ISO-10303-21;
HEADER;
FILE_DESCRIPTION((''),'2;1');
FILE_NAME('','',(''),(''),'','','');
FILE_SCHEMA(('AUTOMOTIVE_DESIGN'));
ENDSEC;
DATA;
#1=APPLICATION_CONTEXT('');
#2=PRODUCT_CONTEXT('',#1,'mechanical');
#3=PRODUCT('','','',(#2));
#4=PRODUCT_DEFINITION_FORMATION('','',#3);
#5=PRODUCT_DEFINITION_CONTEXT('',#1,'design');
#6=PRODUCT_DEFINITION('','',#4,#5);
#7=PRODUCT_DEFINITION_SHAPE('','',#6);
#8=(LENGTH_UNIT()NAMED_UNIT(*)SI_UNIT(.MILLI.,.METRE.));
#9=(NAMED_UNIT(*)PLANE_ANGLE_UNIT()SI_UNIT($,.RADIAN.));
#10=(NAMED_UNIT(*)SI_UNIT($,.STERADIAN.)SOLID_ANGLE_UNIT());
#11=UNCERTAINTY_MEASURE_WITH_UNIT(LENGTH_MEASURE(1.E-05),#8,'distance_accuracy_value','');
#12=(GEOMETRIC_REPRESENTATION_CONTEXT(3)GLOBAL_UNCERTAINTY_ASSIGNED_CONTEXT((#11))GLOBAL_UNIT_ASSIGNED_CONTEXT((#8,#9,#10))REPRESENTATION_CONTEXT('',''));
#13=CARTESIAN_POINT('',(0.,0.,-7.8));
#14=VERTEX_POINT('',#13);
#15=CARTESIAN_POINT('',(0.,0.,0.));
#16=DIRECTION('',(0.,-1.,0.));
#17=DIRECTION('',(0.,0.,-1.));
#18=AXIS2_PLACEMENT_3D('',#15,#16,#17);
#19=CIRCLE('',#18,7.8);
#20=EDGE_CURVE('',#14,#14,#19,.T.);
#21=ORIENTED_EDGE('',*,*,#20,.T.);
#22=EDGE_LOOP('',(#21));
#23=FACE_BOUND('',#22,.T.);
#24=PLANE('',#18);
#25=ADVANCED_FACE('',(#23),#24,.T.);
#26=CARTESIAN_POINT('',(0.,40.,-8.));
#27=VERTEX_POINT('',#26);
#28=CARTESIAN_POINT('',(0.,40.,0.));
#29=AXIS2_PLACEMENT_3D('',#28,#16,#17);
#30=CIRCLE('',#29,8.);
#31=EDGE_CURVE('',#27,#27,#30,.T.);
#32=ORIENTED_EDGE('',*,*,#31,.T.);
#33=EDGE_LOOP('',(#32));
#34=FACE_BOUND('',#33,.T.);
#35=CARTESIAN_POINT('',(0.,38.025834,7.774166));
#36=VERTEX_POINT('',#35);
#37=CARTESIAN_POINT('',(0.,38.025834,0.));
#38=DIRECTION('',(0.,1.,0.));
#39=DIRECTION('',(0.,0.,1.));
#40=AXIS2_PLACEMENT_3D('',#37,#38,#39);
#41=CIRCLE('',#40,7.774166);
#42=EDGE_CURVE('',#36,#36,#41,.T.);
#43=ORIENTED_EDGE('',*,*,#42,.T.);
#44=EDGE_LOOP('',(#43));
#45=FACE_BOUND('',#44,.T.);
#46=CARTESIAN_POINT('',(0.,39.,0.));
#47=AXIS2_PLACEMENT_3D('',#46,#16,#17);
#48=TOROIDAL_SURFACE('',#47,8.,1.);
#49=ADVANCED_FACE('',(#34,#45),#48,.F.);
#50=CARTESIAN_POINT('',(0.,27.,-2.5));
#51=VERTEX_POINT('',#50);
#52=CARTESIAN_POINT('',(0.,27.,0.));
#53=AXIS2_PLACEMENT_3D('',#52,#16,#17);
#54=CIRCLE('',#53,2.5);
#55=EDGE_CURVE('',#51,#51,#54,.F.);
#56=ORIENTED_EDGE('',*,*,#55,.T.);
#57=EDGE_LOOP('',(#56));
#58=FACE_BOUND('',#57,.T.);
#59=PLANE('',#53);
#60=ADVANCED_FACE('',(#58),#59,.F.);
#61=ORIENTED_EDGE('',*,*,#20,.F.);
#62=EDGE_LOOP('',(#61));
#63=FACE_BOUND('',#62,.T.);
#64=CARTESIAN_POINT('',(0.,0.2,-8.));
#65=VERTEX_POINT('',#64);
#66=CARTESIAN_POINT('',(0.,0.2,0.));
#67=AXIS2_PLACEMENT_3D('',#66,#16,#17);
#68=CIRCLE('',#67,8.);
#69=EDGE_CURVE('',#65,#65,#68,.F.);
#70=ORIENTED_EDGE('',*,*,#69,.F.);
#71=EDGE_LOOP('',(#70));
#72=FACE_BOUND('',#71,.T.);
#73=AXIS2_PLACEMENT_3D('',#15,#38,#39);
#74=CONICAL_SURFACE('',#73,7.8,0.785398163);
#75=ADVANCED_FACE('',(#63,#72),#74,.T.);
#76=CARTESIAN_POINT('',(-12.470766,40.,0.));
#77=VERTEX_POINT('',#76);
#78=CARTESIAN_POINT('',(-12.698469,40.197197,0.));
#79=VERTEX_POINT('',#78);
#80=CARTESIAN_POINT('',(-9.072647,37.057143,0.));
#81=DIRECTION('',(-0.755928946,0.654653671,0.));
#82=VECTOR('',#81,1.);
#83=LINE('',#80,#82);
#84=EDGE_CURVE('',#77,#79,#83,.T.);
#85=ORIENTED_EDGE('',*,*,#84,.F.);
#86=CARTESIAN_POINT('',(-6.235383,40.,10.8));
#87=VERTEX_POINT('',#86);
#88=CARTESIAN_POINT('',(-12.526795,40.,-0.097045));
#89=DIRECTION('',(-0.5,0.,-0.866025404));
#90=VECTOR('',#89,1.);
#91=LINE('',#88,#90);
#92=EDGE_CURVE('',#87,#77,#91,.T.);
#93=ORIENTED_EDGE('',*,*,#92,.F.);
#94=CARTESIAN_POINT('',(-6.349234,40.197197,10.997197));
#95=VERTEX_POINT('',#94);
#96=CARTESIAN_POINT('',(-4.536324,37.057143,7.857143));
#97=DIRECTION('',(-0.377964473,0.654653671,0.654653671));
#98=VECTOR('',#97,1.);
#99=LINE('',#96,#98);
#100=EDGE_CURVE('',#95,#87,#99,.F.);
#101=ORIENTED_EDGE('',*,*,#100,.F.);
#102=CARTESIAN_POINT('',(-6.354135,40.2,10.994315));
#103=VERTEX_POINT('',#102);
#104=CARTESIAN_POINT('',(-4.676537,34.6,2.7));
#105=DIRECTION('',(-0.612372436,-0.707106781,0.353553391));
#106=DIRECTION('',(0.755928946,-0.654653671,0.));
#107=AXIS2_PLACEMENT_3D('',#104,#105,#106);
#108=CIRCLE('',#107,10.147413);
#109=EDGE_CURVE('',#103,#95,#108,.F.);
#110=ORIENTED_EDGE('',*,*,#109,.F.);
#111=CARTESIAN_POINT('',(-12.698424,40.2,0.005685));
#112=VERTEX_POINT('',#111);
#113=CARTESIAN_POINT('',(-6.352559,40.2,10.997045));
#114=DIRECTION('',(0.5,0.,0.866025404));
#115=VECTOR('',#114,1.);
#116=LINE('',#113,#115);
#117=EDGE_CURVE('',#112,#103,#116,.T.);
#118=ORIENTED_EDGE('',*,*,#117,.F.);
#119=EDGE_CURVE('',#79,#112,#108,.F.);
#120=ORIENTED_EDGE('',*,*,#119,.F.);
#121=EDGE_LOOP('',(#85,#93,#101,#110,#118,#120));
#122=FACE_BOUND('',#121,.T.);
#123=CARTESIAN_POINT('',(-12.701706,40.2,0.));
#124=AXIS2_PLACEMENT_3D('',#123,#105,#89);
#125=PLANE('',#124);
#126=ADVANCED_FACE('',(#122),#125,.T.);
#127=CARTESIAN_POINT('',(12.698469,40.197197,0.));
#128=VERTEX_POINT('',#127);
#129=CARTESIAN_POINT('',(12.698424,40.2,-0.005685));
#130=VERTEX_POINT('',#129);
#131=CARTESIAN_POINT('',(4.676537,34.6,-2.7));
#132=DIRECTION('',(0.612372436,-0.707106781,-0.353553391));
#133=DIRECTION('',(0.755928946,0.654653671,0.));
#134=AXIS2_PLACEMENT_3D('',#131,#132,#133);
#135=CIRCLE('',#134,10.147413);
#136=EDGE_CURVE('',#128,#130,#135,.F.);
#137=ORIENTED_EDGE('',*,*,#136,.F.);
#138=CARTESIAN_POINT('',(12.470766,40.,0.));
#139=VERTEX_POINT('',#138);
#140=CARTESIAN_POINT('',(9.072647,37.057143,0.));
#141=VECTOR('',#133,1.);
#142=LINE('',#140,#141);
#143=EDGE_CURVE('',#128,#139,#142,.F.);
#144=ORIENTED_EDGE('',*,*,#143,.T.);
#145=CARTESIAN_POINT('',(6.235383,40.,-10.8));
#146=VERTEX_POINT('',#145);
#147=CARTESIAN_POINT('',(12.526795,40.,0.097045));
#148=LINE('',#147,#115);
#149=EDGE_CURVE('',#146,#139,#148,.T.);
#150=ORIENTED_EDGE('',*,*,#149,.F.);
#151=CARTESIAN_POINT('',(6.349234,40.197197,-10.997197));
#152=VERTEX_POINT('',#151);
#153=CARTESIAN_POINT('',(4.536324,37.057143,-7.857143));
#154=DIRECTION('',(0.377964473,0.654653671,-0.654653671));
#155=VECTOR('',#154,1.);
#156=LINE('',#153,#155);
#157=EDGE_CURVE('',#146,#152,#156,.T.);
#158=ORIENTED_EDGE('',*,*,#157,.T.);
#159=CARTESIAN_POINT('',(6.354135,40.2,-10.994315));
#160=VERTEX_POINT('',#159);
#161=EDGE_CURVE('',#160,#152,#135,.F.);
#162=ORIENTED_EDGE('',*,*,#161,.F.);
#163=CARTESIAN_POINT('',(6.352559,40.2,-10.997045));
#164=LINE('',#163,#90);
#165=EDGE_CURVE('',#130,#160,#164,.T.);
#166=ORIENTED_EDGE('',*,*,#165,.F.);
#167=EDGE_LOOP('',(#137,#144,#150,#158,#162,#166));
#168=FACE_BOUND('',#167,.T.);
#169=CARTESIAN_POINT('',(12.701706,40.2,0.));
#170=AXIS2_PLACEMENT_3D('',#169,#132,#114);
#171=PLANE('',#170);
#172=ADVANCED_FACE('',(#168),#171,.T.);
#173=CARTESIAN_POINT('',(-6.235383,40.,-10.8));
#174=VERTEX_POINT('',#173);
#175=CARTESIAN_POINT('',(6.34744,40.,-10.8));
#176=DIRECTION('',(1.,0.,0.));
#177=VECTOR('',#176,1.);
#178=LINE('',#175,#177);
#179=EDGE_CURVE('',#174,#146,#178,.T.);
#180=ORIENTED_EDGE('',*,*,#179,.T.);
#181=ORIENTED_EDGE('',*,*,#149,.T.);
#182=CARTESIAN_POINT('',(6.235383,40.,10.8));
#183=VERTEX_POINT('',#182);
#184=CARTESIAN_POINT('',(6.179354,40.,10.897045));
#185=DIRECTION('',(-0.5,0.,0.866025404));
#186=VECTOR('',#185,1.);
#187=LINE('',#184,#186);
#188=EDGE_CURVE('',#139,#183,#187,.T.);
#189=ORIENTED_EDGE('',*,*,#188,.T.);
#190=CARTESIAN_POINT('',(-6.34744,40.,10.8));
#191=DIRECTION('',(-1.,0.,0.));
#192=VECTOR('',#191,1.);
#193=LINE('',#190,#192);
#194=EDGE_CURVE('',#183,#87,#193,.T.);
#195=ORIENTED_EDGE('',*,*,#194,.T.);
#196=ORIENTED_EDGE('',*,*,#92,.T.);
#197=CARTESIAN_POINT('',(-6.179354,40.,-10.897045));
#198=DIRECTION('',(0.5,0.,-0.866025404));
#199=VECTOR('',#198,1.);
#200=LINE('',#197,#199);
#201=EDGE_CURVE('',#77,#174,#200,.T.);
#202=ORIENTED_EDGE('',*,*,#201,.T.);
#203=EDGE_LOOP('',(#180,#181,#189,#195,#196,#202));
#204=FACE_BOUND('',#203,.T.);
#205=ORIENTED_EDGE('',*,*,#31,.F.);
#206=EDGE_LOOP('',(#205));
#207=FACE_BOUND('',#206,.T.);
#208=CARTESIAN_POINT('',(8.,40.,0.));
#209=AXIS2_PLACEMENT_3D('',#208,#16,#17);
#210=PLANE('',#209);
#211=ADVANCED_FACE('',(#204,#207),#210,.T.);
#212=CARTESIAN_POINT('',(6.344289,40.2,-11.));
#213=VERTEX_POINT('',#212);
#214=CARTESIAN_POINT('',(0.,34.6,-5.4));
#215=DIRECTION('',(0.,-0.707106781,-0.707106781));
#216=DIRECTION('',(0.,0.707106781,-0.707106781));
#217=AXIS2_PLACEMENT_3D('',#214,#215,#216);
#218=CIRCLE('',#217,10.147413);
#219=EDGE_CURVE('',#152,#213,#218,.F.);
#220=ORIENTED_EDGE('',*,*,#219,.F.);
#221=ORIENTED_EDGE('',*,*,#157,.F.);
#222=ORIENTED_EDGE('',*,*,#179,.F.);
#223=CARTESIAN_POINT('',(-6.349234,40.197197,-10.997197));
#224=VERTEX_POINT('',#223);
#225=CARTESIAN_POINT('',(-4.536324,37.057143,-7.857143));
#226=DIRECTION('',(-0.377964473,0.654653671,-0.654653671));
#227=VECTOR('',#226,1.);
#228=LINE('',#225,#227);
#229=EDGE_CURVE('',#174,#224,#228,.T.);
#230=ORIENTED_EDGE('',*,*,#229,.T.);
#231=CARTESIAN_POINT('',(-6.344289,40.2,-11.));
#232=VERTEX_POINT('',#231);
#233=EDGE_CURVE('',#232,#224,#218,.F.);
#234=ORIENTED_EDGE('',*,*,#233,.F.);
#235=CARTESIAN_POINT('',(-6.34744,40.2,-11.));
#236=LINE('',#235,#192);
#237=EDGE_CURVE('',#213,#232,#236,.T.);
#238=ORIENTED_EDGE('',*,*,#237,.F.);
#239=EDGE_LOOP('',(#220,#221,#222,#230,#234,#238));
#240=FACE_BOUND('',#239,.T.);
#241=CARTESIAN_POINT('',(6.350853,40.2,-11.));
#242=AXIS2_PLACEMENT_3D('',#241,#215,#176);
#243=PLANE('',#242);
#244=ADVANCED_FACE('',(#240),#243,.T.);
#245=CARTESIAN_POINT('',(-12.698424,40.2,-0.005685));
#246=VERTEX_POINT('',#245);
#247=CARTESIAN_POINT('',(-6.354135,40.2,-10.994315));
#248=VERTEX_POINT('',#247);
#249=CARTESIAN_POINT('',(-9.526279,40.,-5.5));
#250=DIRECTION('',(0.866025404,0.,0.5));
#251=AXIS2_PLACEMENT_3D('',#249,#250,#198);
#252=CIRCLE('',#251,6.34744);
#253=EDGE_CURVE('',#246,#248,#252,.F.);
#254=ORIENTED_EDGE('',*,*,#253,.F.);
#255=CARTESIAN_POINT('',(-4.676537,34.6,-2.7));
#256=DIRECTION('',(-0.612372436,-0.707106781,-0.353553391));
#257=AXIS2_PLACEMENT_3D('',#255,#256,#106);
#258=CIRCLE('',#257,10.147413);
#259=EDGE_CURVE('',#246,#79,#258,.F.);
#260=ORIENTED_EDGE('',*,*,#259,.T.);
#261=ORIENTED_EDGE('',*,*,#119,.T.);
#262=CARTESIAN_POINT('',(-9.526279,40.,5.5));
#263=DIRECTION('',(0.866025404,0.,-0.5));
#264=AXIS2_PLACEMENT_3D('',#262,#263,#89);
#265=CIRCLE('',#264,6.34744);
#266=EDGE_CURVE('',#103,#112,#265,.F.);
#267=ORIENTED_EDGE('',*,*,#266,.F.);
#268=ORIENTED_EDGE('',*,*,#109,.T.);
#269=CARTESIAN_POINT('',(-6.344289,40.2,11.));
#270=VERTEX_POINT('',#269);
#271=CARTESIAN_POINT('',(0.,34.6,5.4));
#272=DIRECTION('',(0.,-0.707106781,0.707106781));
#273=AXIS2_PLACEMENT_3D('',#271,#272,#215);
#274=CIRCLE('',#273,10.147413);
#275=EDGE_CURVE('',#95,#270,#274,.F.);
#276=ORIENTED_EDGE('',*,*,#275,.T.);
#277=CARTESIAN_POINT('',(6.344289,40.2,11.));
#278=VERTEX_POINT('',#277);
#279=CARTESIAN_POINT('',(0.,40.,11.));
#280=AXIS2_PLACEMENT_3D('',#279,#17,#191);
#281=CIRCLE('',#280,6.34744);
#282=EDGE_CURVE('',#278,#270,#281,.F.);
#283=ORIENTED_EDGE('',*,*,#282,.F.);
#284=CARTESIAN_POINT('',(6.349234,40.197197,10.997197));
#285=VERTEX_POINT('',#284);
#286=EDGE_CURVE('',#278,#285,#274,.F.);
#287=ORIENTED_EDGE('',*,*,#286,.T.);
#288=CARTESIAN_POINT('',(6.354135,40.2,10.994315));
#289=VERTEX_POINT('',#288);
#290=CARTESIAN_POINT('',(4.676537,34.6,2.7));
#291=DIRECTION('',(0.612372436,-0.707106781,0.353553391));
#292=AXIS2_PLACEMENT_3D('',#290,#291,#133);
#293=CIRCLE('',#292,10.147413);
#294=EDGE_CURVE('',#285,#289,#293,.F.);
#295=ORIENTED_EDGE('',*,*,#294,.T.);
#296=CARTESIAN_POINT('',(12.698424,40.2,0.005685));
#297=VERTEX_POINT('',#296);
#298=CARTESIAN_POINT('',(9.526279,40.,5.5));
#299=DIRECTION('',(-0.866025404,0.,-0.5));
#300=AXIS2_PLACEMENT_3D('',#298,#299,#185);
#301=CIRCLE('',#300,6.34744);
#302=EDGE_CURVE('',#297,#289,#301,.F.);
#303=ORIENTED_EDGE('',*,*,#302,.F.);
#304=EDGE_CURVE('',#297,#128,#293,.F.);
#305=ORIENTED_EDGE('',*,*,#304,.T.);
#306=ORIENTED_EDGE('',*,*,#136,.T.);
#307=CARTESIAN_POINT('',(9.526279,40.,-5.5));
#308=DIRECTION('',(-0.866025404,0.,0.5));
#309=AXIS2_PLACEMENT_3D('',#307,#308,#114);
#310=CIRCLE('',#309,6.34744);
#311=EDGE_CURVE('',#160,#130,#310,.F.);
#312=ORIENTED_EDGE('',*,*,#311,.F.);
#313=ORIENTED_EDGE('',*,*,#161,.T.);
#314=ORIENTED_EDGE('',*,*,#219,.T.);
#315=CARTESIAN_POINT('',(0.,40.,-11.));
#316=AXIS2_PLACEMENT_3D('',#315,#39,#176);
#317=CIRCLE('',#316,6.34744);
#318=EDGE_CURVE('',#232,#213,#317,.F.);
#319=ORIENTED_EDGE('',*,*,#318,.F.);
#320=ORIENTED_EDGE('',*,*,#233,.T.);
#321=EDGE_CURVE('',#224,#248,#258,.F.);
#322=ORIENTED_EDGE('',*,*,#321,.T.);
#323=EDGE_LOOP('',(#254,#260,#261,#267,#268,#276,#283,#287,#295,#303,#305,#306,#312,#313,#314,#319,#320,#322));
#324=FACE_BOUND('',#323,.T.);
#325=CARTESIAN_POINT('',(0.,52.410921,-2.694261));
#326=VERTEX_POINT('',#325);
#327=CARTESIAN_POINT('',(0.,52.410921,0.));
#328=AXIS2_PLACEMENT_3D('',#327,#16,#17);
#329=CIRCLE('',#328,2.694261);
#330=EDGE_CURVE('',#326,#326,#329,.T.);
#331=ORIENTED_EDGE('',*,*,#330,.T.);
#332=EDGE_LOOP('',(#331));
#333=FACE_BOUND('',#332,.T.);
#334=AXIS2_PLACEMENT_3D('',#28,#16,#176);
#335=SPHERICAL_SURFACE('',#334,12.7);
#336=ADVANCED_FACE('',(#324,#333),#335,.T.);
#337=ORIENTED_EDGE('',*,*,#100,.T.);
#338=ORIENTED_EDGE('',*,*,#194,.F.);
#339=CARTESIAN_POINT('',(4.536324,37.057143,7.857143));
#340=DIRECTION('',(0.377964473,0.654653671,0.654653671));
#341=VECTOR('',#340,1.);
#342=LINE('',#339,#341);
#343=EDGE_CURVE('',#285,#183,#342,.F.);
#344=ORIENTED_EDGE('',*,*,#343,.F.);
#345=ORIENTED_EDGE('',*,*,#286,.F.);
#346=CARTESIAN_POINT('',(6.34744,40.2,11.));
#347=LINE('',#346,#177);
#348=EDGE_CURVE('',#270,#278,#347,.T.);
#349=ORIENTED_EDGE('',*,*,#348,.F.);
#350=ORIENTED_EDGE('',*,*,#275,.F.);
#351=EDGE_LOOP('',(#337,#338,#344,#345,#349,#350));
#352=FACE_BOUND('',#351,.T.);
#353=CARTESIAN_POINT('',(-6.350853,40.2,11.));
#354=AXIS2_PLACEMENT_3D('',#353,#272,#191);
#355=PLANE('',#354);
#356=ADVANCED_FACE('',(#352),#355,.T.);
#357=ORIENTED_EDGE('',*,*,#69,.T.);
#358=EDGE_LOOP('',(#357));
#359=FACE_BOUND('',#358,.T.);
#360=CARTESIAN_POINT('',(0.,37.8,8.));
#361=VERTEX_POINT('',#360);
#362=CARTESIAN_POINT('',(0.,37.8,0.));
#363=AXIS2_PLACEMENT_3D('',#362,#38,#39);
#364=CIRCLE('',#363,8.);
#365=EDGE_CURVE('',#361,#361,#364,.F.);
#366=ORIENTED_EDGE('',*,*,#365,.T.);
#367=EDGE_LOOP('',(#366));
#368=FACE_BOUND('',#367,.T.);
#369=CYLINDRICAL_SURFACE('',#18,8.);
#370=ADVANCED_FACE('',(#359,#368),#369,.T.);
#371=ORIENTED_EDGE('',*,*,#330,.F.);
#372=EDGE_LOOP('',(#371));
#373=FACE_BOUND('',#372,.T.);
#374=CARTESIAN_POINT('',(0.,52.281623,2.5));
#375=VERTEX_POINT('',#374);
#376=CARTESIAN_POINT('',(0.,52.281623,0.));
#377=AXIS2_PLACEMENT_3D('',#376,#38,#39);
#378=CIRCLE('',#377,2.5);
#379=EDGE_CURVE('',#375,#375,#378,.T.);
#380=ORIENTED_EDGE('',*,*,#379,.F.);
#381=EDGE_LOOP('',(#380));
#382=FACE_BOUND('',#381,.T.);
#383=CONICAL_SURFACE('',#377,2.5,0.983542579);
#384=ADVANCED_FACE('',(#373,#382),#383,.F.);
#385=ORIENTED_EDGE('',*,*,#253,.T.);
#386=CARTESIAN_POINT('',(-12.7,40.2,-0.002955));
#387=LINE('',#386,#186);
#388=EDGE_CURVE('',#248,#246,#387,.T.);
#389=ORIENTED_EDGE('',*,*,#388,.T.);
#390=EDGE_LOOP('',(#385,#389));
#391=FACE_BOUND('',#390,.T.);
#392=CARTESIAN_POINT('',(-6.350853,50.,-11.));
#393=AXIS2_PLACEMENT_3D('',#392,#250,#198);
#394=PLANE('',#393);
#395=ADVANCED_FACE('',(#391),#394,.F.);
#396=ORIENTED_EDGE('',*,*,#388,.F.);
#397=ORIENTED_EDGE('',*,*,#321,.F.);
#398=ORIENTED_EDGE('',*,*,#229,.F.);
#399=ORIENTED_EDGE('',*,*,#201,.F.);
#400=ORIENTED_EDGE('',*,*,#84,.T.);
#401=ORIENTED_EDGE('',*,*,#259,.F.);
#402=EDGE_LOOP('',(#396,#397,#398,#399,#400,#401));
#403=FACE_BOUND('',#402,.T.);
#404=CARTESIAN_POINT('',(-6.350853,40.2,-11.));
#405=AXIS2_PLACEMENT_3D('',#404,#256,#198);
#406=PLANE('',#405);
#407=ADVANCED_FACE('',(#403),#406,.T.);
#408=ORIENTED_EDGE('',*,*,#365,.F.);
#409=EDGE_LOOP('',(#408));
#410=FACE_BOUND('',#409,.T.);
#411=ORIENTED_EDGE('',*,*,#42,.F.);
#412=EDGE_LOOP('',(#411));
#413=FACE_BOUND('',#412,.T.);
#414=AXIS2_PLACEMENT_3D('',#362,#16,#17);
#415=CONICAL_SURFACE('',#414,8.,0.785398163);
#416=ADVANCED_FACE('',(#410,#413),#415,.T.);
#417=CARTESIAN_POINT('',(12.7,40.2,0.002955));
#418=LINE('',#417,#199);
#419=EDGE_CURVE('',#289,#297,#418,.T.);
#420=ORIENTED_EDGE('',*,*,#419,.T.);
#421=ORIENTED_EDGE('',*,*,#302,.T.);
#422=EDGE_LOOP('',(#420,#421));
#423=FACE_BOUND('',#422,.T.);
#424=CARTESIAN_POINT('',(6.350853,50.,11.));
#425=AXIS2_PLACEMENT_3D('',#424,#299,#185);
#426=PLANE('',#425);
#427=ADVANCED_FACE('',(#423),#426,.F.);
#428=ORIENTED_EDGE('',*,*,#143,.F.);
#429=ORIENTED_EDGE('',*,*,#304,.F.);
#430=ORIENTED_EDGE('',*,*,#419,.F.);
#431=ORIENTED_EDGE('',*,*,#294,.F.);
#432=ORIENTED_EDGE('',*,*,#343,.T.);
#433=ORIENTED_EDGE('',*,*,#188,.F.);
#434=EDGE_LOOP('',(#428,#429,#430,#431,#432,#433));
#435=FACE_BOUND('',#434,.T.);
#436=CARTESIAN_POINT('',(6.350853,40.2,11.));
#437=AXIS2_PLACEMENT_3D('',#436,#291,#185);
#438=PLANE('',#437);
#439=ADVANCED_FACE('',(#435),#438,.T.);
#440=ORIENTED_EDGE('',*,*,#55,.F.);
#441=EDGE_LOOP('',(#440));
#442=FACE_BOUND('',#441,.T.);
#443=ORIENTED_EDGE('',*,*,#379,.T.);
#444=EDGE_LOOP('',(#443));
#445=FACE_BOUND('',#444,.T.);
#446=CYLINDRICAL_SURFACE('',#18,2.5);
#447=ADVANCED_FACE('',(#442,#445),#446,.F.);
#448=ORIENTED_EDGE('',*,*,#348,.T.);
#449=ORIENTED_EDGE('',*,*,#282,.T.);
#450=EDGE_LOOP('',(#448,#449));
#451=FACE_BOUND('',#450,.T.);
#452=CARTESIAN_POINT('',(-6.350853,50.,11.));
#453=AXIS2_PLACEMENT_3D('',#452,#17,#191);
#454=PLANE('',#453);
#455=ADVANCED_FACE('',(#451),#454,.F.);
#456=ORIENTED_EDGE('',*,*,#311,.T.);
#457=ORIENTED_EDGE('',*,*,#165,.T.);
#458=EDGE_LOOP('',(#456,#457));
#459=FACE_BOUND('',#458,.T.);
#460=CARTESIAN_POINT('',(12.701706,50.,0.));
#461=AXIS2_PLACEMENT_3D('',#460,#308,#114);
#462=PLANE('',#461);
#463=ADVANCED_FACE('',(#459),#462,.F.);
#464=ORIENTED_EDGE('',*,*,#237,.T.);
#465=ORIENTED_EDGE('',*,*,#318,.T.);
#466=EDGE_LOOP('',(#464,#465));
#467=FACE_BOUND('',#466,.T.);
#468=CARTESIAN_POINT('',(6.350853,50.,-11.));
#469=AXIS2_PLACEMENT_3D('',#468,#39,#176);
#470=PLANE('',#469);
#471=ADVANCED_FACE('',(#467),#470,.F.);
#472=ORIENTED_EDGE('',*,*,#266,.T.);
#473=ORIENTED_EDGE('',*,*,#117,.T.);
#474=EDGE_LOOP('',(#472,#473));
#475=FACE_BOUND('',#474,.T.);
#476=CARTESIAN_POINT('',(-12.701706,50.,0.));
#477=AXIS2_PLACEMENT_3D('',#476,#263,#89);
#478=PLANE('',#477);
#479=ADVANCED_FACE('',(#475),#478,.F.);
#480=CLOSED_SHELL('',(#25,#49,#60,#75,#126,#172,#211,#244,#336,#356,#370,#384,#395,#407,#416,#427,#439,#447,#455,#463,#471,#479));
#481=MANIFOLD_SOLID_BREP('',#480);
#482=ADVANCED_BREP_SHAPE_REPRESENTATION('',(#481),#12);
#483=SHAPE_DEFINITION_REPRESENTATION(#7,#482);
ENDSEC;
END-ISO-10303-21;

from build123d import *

# Parameters (mm, degrees)
SKETCH2_R             = 19.260759025
CUT_EXTRUDE1_DEPTH    = 50
M6X1_0_TAPPED_HOLE1_D = 5
CHAMFER1_SIZE         = 0.2
CHAMFER1_SIZE_2       = 0.169882553
BOSS_EXTRUDE1_START   = -27
SKETCH6_R             = 2.5
BOSS_EXTRUDE1_DEPTH   = 27


with BuildPart() as part:
    # Sketch3 → Revolve1 (revolve)
    with BuildSketch(Plane.XY, mode=Mode.PRIVATE) as revolve1_sk:
        with BuildLine():
            Line((0, 0), (8, 0))
            Line((8, 0), (8, 38))
            ThreePointArc((8, 38), (7, 39), (8, 40))
            Line((8, 40), (12.7, 40))
            ThreePointArc((12.7, 40), (8.980256121, 48.980256121), (0, 52.7))
            Line((0, 52.7), (0, 0))
        make_face()
    revolve(revolve1_sk.sketch.rotate(Axis((0, 0, 0), (0, 1, 0)), 90), axis=Axis((0, 0, 0), (0, 1, 0)))

    # Sketch2 → Cut-Extrude1 (cut)
    with BuildSketch(Plane(origin=(0, 0, 0), x_dir=(1, 0, 0), z_dir=(0, 1, 0))):
        Circle(SKETCH2_R)
        Polygon((-6.350852961, 11), (-12.701705922, 0), (-6.350852961, -11), (6.350852961, -11), (12.701705922, 0), (6.350852961, 11), align=None, mode=Mode.SUBTRACT)
    extrude(amount=CUT_EXTRUDE1_DEPTH, mode=Mode.SUBTRACT)

    # M6x1.0 Tapped Hole1 (through all)
    with Locations(Plane(origin=(0, 0, 0), x_dir=(-1, 0, 0), z_dir=(0, -1, 0))):
        with Locations((0, 0)):
            Hole(M6X1_0_TAPPED_HOLE1_D / 2)

    # Chamfer1
    # the kernel refuses this chamfer: 0.2, 0.169882553 mm, written as the material it takes off along each edge
    with BuildSketch(Plane(origin=(12.957167955, 40, 0.44247322), x_dir=(-0.8660254037844386, 0, 0.5), z_dir=(-0.5000000000000001, 0, -0.8660254037844387)), Plane(origin=(6.095390928, 40, 11.44247322), x_dir=(-0.8660254037844386, 0, -0.5), z_dir=(0.5000000000000001, 0, -0.8660254037844386)), Plane(origin=(-6.861777027, 40, 11), x_dir=(0, 0, -1), z_dir=(1, 0, 0)), Plane(origin=(-12.957167955, 40, -0.44247322), x_dir=(0.8660254037844387, 0, -0.5), z_dir=(0.5, 0, 0.8660254037844387)), Plane(origin=(-6.095390928, 40, -11.44247322), x_dir=(0.8660254037844384, 0, 0.5000000000000002), z_dir=(-0.5000000000000003, 0, 0.8660254037844386)), Plane(origin=(6.861777027, 40, -11), x_dir=(0, 0, 1), z_dir=(-1, 0, 0))) as chamfer1_piece_1:
        Polygon((CHAMFER1_SIZE, 0), (0, CHAMFER1_SIZE), (0, 0), align=None)
    extrude(amount=13.723554053, mode=Mode.SUBTRACT)
    with BuildSketch(Plane(origin=(0, 38, 0), x_dir=(0, 0, -1), z_dir=(1, 0, 0))) as chamfer1_piece_2:
        with BuildLine():
            Line((8, -CHAMFER1_SIZE), (7.774165739, 0.025834261))
            ThreePointArc((7.774165739, 0.025834261), (7.883207603, 0.00684365), (8, 0))
            Line((8, 0), (8, -CHAMFER1_SIZE))
        make_face()
    revolve(axis=Axis((0, 38, 0), (0, 1, 0)), mode=Mode.SUBTRACT)
    with BuildSketch(Plane(origin=(0, 0, 0), x_dir=(0, 0, -1), z_dir=(1, 0, 0))) as chamfer1_piece_3:
        Polygon((8 - CHAMFER1_SIZE, 0), (8, CHAMFER1_SIZE), (8, 0), align=None)
    revolve(axis=Axis((0, 0, 0), (0, 1, 0)), mode=Mode.SUBTRACT)
    with BuildSketch(Plane(origin=(0, 52.451505933, 0), x_dir=(1, 0, 0), z_dir=(0, 0, 1))) as chamfer1_piece_4:
        with BuildLine():
            Line((2.5, -CHAMFER1_SIZE_2), (2.694261242, -0.040585082))
            ThreePointArc((2.694261242, -0.040585082), (2.599956234, -0.020487166), (2.5, 0))
            Line((2.5, 0), (2.5, -CHAMFER1_SIZE_2))
        make_face()
    revolve(axis=Axis((0, 52.451505933, 0), (0, 1, 0)), revolution_arc=90, mode=Mode.SUBTRACT)
    with BuildSketch(Plane(origin=(0, 52.451505933, 0), x_dir=(0, 0, -1), z_dir=(1, 0, 0))) as chamfer1_piece_5:
        with BuildLine():
            Line((2.5, -CHAMFER1_SIZE_2), (2.694261242, -0.040585082))
            ThreePointArc((2.694261242, -0.040585082), (2.599956234, -0.020487166), (2.5, 0))
            Line((2.5, 0), (2.5, -CHAMFER1_SIZE_2))
        make_face()
    revolve(axis=Axis((0, 52.451505933, 0), (0, 1, 0)), revolution_arc=270, mode=Mode.SUBTRACT)

    # Sketch6 → Boss-Extrude1 (add)
    with BuildSketch(Plane.XZ.offset(BOSS_EXTRUDE1_START)):
        with Locations(Location((0, 0, 0), (0, 0, 270))):
            Circle(SKETCH6_R)
    extrude(amount=BOSS_EXTRUDE1_DEPTH)


solid = part.part
